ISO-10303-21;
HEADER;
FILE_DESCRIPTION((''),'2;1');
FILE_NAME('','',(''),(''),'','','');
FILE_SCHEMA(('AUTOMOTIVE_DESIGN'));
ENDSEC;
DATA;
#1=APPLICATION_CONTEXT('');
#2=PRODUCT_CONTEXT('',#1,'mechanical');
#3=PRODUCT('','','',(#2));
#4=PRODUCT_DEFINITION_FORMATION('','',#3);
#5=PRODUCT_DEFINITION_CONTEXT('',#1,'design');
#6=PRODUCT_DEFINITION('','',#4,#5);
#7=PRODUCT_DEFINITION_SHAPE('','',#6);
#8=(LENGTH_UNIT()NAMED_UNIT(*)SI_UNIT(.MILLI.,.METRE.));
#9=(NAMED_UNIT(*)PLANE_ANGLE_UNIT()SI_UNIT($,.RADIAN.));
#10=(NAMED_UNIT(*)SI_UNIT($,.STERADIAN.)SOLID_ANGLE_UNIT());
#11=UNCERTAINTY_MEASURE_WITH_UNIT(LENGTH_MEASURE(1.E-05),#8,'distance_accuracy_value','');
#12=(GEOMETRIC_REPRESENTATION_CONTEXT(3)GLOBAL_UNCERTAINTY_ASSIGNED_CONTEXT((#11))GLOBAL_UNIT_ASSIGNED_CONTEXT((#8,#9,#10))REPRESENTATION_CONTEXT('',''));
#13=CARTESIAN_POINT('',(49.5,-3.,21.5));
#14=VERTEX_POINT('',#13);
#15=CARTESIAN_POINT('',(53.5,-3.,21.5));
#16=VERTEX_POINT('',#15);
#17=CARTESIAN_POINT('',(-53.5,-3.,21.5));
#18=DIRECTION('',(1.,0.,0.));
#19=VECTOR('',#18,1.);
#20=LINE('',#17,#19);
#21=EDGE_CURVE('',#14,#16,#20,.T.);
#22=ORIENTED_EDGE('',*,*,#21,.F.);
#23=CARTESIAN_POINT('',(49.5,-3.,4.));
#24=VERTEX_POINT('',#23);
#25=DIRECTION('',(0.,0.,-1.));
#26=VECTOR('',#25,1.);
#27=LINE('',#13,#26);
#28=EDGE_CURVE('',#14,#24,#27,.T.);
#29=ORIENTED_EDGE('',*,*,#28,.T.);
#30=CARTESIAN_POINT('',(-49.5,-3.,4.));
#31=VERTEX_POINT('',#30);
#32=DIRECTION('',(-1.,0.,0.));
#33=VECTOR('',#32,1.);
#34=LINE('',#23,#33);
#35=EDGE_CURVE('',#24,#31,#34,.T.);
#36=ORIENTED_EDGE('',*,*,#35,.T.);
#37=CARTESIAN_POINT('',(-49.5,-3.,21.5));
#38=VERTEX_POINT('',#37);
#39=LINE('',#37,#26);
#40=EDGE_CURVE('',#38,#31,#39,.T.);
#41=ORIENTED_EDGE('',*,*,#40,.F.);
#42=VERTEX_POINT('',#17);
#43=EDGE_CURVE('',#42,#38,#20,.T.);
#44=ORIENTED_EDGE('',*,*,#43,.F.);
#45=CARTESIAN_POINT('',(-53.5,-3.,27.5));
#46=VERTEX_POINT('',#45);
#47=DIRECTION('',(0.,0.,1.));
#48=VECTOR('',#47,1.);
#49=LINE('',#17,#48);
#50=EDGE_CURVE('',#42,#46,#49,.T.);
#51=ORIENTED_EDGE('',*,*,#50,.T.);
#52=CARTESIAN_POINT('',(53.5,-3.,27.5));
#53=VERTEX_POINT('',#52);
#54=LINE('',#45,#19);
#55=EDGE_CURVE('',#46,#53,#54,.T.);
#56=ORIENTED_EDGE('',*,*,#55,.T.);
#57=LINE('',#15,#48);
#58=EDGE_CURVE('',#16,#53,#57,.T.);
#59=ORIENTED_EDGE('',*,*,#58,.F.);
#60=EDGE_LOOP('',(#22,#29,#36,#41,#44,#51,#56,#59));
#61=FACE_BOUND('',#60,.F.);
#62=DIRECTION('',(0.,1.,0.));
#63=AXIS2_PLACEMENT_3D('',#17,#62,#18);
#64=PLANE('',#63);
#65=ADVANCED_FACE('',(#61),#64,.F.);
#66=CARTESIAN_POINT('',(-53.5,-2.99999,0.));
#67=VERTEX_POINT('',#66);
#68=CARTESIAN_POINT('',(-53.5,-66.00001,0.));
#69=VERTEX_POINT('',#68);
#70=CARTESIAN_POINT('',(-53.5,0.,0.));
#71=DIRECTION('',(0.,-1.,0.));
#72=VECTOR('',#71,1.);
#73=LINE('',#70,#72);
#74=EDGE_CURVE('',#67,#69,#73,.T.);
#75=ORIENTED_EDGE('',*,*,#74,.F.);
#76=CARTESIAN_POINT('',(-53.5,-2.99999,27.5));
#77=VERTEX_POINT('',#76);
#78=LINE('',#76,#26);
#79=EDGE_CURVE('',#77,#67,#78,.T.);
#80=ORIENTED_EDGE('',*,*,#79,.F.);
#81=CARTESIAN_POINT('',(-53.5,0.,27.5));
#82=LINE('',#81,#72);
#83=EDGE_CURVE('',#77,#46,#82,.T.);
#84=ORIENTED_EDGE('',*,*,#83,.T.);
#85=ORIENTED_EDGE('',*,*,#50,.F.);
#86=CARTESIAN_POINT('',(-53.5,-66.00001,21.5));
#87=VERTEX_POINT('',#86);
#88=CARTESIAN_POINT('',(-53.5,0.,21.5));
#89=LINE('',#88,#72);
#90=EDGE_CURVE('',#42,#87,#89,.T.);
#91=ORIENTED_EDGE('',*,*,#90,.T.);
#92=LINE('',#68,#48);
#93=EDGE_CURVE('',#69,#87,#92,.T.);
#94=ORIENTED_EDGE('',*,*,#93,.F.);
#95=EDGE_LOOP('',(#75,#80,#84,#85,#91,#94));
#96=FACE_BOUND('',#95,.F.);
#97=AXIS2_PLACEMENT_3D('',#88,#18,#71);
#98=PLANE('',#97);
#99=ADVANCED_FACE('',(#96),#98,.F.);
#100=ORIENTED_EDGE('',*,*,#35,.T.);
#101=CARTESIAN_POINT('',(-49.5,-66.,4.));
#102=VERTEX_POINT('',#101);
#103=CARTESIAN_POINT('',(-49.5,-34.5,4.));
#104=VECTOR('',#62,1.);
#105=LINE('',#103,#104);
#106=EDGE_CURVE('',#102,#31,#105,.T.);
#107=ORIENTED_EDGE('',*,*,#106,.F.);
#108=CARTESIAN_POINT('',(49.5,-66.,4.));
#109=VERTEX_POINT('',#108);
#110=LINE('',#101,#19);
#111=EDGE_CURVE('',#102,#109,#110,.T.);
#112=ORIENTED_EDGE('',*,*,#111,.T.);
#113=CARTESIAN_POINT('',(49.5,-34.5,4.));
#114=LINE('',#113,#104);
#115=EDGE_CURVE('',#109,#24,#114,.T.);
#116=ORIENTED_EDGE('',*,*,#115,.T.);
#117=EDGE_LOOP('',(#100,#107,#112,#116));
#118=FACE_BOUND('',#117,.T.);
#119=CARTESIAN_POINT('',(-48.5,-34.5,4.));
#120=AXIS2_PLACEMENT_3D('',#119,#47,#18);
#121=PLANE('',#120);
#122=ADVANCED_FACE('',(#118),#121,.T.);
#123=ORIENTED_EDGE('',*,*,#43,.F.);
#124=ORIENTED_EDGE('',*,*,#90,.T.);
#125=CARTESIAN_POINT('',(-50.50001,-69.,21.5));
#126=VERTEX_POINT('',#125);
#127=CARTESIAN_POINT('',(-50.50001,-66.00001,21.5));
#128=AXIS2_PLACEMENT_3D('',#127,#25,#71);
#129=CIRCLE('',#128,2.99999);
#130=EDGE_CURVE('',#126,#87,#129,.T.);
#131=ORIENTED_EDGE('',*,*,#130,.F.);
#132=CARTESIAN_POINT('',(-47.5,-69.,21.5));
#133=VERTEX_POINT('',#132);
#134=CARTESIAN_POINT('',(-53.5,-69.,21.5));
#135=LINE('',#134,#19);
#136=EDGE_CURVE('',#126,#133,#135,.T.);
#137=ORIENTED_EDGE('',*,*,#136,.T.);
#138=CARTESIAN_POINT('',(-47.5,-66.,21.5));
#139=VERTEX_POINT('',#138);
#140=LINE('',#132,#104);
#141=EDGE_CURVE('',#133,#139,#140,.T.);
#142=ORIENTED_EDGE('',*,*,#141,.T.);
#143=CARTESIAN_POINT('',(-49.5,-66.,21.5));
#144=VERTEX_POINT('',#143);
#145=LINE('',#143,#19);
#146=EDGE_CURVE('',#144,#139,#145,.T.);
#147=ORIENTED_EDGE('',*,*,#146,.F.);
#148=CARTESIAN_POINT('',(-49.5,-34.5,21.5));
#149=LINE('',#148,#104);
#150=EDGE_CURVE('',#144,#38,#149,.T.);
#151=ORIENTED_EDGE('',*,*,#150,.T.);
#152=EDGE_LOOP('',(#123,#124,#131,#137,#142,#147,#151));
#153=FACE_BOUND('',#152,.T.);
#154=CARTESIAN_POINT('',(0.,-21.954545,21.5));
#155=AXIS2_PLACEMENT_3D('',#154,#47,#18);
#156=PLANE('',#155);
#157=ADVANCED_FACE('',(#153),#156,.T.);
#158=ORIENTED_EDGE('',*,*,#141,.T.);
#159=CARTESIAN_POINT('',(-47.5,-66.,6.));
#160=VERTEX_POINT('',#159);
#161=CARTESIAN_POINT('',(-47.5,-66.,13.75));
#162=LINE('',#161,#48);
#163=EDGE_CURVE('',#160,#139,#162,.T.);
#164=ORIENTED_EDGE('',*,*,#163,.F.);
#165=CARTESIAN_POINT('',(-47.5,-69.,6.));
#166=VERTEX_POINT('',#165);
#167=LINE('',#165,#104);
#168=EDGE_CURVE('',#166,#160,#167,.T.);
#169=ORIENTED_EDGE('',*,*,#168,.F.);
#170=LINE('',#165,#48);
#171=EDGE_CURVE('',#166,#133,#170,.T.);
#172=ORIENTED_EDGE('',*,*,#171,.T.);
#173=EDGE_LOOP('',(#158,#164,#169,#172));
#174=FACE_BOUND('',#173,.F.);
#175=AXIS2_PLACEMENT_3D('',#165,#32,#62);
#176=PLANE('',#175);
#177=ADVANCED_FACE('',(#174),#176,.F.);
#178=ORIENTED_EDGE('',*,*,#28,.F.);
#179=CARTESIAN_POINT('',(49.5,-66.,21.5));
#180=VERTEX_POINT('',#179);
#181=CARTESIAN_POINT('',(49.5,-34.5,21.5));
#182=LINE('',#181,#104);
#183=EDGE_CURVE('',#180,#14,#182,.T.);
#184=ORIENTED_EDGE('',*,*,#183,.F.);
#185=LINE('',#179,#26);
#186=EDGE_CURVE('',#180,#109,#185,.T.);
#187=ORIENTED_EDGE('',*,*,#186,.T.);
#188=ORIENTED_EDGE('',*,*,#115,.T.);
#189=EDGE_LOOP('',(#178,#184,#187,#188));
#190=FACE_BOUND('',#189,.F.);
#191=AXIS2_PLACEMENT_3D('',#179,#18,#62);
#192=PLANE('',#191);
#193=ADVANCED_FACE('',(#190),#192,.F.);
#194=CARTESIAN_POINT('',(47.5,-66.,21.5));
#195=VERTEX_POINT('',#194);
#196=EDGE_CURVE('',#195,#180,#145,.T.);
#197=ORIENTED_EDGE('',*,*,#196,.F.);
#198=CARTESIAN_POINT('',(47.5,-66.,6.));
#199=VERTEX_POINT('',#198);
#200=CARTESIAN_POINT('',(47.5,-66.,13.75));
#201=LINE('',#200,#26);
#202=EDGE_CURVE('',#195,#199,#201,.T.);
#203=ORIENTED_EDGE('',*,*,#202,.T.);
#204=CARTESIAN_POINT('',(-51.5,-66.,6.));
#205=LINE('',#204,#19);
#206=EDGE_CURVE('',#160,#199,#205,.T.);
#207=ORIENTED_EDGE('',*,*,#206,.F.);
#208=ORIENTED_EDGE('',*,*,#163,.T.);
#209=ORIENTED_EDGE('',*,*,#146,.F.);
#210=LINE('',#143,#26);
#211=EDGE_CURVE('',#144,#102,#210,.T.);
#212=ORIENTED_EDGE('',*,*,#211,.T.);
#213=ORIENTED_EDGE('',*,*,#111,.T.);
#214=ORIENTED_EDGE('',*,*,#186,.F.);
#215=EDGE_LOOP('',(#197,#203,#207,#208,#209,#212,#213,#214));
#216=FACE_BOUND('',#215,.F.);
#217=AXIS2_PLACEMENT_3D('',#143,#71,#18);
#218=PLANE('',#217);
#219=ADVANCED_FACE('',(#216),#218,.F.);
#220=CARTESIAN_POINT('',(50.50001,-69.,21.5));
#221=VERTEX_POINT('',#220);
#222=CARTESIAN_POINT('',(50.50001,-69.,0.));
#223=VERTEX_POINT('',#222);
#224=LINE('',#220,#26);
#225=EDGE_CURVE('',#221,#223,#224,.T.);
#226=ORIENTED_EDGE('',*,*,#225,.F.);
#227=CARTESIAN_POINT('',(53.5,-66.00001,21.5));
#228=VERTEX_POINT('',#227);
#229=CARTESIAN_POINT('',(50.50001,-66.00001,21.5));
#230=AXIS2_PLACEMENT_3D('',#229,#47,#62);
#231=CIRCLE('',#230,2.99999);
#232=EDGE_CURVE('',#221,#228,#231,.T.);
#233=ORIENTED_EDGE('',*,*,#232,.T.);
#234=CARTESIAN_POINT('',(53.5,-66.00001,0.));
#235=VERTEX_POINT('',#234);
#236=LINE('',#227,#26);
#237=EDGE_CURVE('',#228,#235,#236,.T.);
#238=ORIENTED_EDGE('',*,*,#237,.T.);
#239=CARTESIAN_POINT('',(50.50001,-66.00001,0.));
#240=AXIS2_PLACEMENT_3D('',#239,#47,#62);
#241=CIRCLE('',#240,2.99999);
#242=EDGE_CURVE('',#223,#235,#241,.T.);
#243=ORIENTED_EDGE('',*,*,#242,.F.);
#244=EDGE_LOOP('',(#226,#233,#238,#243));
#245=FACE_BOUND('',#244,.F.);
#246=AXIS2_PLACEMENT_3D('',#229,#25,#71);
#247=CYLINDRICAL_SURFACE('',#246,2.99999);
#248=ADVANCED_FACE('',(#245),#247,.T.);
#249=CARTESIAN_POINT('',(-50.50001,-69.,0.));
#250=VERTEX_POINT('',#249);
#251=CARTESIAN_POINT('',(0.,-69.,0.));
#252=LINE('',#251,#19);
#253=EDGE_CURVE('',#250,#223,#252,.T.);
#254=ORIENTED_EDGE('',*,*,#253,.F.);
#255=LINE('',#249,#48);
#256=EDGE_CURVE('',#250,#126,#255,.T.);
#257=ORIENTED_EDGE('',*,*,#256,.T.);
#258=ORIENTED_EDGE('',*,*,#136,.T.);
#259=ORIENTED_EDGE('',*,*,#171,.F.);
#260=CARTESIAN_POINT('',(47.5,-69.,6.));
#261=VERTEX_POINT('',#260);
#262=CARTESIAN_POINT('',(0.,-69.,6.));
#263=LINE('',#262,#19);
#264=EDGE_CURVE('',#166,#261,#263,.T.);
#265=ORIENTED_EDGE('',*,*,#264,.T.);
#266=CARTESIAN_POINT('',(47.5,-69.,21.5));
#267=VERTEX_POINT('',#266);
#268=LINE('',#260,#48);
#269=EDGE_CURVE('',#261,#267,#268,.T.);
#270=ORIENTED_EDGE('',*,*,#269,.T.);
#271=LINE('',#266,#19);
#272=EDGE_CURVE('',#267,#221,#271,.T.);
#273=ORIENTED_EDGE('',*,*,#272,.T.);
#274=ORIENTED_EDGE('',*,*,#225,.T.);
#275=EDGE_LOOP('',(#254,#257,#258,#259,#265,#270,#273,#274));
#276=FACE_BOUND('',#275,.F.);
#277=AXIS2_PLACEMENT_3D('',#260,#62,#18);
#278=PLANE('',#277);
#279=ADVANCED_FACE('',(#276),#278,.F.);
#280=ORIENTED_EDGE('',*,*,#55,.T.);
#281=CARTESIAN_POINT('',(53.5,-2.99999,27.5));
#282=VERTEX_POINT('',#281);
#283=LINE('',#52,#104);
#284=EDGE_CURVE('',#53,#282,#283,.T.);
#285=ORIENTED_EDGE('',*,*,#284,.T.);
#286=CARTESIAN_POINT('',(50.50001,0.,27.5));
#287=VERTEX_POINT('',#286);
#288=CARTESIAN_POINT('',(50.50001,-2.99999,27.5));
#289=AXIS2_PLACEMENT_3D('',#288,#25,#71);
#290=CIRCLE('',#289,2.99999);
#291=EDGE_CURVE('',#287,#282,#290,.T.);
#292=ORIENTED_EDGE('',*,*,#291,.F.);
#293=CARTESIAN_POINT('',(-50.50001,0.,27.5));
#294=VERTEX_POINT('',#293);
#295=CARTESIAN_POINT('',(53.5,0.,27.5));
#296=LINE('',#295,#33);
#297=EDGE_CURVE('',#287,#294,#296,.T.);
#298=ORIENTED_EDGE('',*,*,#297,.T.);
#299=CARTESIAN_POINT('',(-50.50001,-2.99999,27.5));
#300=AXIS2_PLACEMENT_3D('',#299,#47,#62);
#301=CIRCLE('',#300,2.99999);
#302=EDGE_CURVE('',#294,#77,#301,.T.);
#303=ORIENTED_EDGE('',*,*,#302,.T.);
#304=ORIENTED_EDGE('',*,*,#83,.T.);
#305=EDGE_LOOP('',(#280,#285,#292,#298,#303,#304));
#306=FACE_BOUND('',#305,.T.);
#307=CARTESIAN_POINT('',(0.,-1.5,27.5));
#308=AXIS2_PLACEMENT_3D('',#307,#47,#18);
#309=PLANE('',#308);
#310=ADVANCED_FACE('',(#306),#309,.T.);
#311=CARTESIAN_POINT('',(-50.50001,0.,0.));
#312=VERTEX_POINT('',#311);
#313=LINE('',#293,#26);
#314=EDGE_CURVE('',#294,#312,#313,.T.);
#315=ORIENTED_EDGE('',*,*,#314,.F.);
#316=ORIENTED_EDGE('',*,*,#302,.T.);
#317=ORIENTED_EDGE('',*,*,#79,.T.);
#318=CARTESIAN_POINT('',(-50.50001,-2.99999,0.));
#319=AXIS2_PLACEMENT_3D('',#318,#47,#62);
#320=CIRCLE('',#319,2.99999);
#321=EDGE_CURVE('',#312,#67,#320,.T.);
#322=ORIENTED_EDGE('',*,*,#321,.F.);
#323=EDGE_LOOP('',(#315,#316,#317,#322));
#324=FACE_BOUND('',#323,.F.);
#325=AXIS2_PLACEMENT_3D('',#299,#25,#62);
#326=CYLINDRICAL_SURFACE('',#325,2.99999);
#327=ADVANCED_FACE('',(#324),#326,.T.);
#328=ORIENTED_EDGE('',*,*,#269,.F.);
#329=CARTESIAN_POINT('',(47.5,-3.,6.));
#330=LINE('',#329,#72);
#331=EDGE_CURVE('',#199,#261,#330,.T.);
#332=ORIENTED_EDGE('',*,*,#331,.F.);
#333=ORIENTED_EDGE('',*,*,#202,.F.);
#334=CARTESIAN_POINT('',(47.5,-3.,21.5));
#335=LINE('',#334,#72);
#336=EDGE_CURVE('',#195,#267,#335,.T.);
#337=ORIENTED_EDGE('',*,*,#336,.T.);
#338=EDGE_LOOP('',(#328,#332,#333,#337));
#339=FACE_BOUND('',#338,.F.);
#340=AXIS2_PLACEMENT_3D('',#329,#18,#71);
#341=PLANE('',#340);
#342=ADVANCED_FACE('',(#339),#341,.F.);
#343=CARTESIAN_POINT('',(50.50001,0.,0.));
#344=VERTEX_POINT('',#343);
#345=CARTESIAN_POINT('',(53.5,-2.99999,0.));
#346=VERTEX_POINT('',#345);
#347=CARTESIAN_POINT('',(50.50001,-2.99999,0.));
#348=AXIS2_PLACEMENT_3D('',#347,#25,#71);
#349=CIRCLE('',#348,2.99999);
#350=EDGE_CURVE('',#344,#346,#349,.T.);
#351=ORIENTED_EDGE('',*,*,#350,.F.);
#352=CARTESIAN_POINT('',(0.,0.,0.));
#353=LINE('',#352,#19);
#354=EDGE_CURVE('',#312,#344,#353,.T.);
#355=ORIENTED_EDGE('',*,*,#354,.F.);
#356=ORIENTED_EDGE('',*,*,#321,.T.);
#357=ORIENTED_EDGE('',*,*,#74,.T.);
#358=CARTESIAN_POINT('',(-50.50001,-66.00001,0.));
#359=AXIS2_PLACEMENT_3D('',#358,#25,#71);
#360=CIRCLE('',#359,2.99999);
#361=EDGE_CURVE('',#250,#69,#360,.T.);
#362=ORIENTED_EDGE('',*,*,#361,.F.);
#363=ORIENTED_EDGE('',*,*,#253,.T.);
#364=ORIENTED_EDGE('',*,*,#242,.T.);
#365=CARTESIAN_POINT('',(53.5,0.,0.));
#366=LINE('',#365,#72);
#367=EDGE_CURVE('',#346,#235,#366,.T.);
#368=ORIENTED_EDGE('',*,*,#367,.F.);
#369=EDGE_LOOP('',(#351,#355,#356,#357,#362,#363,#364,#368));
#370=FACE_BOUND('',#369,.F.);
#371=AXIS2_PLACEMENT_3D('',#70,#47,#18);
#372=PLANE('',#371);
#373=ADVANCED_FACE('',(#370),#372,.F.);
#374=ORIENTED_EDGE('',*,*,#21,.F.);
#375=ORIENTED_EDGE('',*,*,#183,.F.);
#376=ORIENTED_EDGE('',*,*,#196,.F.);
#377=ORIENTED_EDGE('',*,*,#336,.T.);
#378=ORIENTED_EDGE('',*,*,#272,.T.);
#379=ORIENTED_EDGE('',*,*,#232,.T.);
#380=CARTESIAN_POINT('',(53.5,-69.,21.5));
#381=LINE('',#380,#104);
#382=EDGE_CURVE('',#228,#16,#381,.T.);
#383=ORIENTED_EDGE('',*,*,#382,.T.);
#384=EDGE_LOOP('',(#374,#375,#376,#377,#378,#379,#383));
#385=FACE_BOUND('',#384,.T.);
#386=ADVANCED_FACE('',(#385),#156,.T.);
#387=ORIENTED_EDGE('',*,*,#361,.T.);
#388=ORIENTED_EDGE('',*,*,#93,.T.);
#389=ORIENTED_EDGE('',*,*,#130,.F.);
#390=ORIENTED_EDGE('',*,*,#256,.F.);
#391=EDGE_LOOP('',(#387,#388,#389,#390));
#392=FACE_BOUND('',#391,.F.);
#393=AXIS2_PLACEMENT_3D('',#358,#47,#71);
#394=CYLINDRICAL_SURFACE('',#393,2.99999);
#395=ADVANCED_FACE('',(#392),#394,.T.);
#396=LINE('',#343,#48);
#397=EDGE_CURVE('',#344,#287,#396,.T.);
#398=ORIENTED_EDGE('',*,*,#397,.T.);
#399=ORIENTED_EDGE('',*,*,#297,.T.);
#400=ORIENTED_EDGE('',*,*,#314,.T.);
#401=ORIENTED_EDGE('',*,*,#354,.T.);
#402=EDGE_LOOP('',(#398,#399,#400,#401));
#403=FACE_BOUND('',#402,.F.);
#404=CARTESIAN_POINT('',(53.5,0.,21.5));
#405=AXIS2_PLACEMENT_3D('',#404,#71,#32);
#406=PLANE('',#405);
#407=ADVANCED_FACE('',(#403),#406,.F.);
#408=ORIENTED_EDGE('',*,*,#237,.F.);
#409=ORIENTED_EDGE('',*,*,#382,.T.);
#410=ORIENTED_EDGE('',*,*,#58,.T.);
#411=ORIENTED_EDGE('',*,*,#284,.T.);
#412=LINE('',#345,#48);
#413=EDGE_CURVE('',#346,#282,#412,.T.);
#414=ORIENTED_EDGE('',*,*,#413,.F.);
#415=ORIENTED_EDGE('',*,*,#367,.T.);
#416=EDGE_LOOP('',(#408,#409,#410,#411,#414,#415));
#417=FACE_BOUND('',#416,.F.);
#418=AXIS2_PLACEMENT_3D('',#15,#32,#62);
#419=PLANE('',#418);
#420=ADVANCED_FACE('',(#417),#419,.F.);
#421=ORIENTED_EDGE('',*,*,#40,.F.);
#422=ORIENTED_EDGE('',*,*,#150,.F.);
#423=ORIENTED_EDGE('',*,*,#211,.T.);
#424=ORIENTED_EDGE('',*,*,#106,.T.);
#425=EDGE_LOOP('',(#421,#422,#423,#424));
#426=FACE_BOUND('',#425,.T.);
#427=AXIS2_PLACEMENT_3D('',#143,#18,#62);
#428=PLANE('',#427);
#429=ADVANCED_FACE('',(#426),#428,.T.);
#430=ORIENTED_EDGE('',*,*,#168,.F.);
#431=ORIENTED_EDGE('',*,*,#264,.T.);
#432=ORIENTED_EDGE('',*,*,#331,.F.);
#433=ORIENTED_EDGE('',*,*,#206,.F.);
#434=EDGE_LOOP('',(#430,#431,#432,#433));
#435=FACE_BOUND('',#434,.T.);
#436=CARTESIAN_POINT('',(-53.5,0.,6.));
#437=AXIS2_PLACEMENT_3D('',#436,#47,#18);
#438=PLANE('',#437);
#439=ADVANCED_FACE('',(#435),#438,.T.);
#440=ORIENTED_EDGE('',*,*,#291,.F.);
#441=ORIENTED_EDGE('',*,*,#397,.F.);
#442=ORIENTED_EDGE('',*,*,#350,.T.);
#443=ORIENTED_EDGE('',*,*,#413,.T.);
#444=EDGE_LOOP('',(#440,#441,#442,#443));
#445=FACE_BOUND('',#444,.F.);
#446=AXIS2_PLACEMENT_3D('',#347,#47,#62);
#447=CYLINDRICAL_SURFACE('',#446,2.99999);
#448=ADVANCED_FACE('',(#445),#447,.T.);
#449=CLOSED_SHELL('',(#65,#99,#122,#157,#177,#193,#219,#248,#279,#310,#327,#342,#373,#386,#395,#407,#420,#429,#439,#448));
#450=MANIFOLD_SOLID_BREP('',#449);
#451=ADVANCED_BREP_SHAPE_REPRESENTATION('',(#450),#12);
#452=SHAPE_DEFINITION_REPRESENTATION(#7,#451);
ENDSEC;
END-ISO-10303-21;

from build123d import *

# Parameters (mm, degrees)
F0_W     = 107
F0_H     = 6
F1_DEPTH = 69
F3_DEPTH = 15.5
F4_W     = 2
F4_H     = 63
F4_W_2   = 95
F5_DEPTH = 17.5
F6_DEPTH = 6
F7_R     = 2.99999


# Not quite as in the source:
# - a fillet or chamfer is up to 0.001 mm smaller than in the source, because OpenCascade refuses the exact size


with BuildPart() as f1:
    # F0 (on Front) → F1 (new body)
    with BuildSketch(Plane.XZ):
        with Locations((0, 3)):
            Rectangle(F0_W, F0_H)
    extrude(amount=F1_DEPTH)

    # F2 (on face) → F3 (join)
    with BuildSketch(Plane.XY.offset(6)):
        Polygon((53.5, -3), (53.5, 0), (47.5, 0), (-47.5, 0), (-53.5, 0), (-53.5, -3), (-53.5, -69), (-47.5, -69), (-47.5, -3), (47.5, -3), (47.5, -69), (53.5, -69), align=None)
    extrude(amount=F3_DEPTH)

    # F4 (on face) → F5 (cut)
    with BuildSketch(Plane.XY.offset(21.5)):
        with Locations((-48.5, -34.5)):
            Rectangle(F4_W, F4_H)
        with Locations((0, -34.5)):
            Rectangle(F4_W_2, F4_H)
        with Locations((48.5, -34.5)):
            Rectangle(F4_W, F4_H)
    extrude(amount=-F5_DEPTH, mode=Mode.SUBTRACT)

    # F4 (on face) → F6 (join)
    with BuildSketch(Plane.XY.offset(21.5)):
        Polygon((-53.5, -3), (-49.5, -3), (-47.5, -3), (47.5, -3), (49.5, -3), (53.5, -3), (53.5, 0), (-53.5, 0), align=None)
    extrude(amount=F6_DEPTH)

    # F7 (radius 3 in the source; OpenCascade refuses exactly that, so slightly less here)
    f7_edges = [f1.edges().sort_by_distance(p)[0] for p in [
        (-53.5, -69, 10.75),
        (53.5, -69, 10.75),
        (53.5, 0, 13.75),
        (-53.5, 0, 13.75),
    ]]
    fillet(f7_edges, radius=F7_R)


solid = f1.part
